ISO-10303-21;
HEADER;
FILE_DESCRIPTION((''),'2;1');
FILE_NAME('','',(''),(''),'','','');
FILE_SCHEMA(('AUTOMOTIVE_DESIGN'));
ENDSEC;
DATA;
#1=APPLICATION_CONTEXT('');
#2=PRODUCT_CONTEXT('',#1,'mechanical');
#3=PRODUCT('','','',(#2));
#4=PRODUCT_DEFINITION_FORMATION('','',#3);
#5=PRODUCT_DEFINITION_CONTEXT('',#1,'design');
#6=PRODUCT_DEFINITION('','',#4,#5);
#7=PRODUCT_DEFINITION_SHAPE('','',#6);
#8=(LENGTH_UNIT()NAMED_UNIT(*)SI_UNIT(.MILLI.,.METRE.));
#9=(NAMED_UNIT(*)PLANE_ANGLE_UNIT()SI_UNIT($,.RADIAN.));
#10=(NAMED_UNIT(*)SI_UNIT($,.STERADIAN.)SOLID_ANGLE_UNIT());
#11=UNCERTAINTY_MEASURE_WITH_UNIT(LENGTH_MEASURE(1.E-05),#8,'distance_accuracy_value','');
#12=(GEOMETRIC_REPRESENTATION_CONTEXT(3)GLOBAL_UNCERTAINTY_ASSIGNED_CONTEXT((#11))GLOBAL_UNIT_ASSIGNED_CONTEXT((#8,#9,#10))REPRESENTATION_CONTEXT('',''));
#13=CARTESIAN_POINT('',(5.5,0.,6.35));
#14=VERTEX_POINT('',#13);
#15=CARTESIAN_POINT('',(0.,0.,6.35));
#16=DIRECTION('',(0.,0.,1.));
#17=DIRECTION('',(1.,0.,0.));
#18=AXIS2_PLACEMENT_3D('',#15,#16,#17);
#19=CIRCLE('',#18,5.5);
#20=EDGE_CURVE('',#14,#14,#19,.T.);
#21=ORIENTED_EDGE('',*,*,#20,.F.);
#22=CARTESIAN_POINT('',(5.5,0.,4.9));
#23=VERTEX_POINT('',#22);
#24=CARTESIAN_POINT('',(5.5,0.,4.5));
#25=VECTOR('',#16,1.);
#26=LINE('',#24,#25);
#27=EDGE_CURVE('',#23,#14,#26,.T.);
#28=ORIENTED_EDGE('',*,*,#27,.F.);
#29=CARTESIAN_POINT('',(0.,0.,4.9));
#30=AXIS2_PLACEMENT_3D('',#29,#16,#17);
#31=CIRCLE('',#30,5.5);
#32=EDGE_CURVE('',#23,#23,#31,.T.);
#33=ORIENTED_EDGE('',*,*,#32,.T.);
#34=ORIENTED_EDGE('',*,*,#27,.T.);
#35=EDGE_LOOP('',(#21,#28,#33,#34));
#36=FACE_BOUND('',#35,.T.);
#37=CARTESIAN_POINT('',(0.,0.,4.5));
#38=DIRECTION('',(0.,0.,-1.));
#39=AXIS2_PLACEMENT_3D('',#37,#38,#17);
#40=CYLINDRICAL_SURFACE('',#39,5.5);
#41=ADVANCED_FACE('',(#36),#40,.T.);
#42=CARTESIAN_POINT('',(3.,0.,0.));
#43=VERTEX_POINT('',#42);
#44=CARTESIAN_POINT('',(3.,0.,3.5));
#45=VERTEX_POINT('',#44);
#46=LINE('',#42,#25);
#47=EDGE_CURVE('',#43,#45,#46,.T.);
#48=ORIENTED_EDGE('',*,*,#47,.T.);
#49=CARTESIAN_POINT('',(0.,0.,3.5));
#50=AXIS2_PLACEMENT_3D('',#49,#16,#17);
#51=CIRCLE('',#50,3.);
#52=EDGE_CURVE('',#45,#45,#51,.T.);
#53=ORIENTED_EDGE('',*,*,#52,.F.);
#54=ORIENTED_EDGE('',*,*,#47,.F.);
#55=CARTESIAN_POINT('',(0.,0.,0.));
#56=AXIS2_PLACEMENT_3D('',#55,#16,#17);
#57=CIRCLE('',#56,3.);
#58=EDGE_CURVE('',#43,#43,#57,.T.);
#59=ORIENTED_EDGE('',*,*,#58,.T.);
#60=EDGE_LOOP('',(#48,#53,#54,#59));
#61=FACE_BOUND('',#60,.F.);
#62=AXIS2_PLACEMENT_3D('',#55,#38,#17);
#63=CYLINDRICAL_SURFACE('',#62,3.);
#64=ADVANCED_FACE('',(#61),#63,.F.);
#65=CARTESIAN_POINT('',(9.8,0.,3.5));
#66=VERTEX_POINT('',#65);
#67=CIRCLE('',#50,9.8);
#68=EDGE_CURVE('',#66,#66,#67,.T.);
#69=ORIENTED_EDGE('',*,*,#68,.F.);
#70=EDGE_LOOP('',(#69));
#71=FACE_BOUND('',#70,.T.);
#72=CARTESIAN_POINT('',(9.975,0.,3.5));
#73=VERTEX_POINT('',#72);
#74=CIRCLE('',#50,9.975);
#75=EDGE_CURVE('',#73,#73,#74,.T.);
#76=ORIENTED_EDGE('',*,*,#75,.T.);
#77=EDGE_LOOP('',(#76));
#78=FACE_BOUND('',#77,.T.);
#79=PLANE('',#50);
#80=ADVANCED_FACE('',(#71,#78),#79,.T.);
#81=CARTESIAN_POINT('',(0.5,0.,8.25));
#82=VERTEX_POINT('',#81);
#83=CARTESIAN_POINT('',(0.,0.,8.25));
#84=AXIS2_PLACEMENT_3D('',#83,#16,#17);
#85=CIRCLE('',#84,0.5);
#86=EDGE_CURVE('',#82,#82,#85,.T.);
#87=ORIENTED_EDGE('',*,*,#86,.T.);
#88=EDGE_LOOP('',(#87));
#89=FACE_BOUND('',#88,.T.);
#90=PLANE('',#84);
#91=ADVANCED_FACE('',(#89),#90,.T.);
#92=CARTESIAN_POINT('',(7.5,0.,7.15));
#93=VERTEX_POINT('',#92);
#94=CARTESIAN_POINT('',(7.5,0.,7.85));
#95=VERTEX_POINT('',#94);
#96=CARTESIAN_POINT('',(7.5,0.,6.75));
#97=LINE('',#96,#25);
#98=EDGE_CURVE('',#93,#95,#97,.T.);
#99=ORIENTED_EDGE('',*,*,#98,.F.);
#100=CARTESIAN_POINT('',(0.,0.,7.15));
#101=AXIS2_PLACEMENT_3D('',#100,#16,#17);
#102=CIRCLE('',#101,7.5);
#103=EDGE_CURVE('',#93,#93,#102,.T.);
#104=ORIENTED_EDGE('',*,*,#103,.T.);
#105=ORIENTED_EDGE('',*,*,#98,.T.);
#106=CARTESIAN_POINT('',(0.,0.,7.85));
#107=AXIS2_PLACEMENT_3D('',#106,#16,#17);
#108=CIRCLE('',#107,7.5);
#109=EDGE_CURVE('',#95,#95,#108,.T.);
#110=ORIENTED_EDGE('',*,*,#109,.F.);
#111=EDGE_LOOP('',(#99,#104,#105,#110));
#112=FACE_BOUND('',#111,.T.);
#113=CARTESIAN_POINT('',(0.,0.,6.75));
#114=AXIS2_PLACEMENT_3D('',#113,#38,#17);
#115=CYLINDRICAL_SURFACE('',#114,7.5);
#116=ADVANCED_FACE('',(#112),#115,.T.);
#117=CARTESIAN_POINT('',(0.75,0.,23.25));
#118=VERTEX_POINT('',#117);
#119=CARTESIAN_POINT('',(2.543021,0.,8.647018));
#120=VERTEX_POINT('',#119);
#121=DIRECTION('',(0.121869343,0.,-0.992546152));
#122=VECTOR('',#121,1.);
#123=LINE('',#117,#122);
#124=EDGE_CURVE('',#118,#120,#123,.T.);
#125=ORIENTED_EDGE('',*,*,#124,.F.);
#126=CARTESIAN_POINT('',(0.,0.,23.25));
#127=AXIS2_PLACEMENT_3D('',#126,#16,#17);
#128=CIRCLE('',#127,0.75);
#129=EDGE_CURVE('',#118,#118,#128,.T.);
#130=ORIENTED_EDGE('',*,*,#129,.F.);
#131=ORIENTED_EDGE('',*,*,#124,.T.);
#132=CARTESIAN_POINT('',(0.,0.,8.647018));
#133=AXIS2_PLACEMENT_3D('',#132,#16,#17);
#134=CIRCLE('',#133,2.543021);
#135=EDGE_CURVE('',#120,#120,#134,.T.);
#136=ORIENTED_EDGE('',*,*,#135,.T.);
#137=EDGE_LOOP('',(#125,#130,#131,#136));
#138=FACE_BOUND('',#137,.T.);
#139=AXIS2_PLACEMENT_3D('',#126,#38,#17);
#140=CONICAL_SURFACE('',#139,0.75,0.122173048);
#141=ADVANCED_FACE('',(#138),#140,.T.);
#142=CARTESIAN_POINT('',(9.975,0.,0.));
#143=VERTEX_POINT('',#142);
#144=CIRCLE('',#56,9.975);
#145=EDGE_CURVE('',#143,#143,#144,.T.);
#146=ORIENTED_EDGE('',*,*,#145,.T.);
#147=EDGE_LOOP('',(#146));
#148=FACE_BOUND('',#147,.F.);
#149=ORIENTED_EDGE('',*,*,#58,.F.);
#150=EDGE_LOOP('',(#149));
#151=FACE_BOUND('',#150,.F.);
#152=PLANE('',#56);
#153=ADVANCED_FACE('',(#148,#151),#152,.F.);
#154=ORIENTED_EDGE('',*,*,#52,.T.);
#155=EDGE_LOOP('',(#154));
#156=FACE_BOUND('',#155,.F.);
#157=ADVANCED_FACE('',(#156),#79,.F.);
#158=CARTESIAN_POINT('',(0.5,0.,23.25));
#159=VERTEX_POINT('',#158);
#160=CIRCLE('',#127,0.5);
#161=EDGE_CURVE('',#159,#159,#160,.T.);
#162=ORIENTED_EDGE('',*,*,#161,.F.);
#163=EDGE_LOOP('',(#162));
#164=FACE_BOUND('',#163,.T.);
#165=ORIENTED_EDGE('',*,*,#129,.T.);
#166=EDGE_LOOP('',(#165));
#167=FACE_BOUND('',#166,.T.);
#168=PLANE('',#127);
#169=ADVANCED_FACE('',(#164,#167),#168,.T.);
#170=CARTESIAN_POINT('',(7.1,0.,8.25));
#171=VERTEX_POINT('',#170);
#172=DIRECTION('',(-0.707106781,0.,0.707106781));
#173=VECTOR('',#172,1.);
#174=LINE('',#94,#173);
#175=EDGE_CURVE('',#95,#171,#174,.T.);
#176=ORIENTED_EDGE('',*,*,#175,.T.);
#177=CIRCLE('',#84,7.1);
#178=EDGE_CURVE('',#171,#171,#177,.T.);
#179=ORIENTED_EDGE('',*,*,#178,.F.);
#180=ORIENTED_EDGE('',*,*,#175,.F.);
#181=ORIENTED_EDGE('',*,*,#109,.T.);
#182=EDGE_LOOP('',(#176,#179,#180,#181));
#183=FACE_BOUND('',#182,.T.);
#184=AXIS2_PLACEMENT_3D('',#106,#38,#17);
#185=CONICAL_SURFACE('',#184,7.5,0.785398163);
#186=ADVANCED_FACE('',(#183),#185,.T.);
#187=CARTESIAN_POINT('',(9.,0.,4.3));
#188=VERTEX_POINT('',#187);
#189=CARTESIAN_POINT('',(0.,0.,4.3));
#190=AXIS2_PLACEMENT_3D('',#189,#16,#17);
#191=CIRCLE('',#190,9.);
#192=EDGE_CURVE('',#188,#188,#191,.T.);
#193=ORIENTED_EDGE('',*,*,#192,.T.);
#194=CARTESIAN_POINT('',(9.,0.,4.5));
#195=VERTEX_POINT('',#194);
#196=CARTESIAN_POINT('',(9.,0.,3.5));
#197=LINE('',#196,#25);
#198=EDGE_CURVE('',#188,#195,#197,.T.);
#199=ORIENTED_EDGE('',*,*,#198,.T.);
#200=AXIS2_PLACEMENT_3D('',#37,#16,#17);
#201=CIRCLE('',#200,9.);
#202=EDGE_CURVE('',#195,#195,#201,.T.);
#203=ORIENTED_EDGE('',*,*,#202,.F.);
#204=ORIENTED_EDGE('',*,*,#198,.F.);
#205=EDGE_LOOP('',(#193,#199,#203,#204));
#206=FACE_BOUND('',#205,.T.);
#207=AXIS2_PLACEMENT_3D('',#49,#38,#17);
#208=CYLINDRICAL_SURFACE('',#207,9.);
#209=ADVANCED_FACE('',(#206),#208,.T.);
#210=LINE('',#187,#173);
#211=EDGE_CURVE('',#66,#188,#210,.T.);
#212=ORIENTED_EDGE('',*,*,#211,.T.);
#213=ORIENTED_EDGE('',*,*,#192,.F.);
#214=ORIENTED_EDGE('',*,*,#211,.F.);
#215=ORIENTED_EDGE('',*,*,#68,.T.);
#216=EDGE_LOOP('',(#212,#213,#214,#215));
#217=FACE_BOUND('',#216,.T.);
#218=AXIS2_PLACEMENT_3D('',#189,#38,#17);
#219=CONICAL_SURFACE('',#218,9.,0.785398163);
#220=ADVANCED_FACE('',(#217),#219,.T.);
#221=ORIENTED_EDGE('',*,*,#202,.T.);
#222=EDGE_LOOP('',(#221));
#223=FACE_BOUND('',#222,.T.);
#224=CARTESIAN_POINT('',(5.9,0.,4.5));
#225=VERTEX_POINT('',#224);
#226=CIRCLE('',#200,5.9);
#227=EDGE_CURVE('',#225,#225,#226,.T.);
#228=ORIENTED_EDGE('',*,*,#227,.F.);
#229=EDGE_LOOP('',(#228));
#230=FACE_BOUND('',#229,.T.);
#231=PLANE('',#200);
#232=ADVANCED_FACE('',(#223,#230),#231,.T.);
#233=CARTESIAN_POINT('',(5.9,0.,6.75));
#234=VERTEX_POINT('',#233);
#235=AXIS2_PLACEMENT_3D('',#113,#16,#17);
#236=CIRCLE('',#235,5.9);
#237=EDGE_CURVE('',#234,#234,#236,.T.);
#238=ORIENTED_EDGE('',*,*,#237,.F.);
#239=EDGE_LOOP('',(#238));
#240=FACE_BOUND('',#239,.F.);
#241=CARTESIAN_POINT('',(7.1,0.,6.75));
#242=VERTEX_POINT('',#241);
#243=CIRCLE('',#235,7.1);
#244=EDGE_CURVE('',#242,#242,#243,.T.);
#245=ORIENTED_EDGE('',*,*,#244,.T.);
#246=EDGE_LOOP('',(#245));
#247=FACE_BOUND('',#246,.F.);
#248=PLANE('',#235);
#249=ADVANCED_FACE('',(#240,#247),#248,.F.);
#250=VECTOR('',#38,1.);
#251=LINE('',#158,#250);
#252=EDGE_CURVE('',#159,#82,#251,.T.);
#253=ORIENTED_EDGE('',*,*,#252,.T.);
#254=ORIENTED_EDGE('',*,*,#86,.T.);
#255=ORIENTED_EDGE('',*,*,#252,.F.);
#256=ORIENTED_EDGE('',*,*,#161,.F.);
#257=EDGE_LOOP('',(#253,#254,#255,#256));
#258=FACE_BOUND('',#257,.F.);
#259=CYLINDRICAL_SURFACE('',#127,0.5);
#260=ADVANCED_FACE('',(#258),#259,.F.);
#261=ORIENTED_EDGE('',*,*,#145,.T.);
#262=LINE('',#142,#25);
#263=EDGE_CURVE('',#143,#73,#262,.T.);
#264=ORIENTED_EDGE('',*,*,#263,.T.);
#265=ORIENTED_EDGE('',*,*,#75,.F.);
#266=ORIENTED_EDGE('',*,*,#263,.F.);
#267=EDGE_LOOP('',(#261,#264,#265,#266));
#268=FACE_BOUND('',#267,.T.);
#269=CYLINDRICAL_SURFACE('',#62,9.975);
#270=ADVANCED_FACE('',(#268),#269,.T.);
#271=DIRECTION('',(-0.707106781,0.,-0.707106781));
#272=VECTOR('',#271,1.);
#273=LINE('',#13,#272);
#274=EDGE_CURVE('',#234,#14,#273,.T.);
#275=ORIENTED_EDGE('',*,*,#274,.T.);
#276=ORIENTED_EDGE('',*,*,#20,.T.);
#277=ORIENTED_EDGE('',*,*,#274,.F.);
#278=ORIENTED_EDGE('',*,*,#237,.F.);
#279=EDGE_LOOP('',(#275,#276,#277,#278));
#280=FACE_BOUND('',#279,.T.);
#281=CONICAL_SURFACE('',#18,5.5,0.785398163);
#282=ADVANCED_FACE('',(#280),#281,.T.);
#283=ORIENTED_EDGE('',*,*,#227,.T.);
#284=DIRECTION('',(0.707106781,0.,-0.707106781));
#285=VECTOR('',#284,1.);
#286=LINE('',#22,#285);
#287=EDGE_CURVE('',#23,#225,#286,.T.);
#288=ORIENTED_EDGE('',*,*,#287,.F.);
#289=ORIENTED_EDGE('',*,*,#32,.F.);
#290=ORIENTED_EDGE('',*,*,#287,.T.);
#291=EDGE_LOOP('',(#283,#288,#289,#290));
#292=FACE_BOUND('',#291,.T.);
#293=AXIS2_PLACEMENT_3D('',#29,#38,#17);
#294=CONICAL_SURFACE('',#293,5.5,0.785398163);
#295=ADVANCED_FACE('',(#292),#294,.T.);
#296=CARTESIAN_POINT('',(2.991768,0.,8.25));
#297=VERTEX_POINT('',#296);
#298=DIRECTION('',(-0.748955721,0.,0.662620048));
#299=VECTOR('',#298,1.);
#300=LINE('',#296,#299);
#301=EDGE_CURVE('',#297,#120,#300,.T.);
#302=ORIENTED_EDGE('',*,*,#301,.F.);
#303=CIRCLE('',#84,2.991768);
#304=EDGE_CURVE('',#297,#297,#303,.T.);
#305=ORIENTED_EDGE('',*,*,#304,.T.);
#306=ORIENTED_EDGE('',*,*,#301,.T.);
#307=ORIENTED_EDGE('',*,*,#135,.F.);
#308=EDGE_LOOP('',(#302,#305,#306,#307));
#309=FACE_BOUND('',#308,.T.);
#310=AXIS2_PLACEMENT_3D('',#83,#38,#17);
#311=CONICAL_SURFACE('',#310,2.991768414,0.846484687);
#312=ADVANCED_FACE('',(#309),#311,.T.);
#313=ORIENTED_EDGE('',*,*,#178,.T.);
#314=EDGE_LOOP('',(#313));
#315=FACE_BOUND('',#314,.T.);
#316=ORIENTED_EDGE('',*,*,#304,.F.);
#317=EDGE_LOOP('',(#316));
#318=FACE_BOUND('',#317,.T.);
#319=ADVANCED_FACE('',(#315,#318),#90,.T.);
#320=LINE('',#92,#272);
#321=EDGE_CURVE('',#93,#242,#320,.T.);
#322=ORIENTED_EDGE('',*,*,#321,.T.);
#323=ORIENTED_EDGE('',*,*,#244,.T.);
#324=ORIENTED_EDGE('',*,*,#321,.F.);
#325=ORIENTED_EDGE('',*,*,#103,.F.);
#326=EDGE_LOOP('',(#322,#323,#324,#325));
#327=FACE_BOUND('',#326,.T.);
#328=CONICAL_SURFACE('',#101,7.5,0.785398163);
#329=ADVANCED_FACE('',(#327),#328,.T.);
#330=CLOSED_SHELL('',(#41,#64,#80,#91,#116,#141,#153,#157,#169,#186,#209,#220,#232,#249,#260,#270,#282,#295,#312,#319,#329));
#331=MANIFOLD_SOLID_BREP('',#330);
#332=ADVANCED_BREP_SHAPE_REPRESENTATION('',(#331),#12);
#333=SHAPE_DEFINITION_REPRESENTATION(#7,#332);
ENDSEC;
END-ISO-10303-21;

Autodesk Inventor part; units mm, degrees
ref_plane "YZ Plane" through (0, 0, 0) normal (1, 0, 0) x (0, 1, 0)
ref_plane "XZ Plane" through (0, 0, 0) normal (0, 1, 0) x (-1, 0, 0)
ref_plane "XY Plane" through (0, 0, 0) normal (0, 0, 1) x (1, 0, 0)
sketch "Sketch1" plane through (0, 0, 0) normal (0, 0, 1) x (1, 0, 0)
  point P0 (0, 0)
sketch "Sketch2" plane through (0, 0, 0) normal (0, 0, 1) x (1, 0, 0)
  circle A0 centre (0, 0) radius 9.975
  circle A1 centre (0, 0) radius 3
  dimension "d0" = 19.95
  dimension "d1" = 6
extrude "Extrusion1" add sketch "Sketch2" along normal blind 3.5
sketch "Sketch3" plane through (0, 0, 3.5) normal (0, 0, 1) x (1, 0, 0)
  circle A0 centre (0, 0) radius 9
  dimension "d9" = 18
extrude "Extrusion2" add sketch "Sketch3" along normal blind 1
sketch "Sketch4" plane through (0, 0, 4.5) normal (0, 0, 1) x (1, 0, 0)
  circle A0 centre (0, 0) radius 5.5
  dimension "nozzleInner" = 11
extrude "Extrusion3" add sketch "Sketch4" along normal blind 2.25
chamfer "Chamfer1" distance 0.8 angle 45 1 edges at (-9, 0, 3.5)
sketch "Sketch5" plane through (0, 0, 6.75) normal (0, 0, 1) x (1, 0, 0)
  circle A0 centre (0, 0) radius 7.5
  dimension "d24" = 15
extrude "Extrusion4" add sketch "Sketch5" along normal blind 1.5
ref_plane "Work Plane2" through (0, 0, 23.25) normal (0, 0, 1) x (1, 0, 0)
sketch "Sketch8" plane through (0, 0, 23.25) normal (0, 0, 1) x (1, 0, 0)
  circle A0 centre (0, 0) radius 0.5
  circle A1 centre (0, 0) radius 0.75
  dimension "d39" = 1
  dimension "d40" = 1.5
extrude "Extrusion7" add sketch "Sketch8" against normal blind 15
draft "FaceDraft1" angle 7 pull direction (0, 0, 1) faces at (0.7476, -0.0603, 13.25) fixed edges at (-0.75, 0, 23.25)
chamfer "Chamfer2" distance 0.4 angle 45 5 edges at (-7.5, 0, 6.75) (-7.5, 0, 8.25) (-5.5, 0, 4.5) (-5.5, 0, 6.75) (-2.5918, 0, 8.25)
equation "\"d1\" = di"
equation "\"d4\" = d10"
equation "\"nozzleInner\" = 0.5 * dO"
equation "\"d39\" = iTip"
equation "\"d40\" = oTip"
equation "\"iTip\" = 1"
equation "\"oTip\" = 1.5"
equation "\"di\" = 6"
equation "\"d10\" = 3.5"
equation "\"dO\" = 22"
properties part number "nozzle-tip1-0402" material "Steel, Mild"
